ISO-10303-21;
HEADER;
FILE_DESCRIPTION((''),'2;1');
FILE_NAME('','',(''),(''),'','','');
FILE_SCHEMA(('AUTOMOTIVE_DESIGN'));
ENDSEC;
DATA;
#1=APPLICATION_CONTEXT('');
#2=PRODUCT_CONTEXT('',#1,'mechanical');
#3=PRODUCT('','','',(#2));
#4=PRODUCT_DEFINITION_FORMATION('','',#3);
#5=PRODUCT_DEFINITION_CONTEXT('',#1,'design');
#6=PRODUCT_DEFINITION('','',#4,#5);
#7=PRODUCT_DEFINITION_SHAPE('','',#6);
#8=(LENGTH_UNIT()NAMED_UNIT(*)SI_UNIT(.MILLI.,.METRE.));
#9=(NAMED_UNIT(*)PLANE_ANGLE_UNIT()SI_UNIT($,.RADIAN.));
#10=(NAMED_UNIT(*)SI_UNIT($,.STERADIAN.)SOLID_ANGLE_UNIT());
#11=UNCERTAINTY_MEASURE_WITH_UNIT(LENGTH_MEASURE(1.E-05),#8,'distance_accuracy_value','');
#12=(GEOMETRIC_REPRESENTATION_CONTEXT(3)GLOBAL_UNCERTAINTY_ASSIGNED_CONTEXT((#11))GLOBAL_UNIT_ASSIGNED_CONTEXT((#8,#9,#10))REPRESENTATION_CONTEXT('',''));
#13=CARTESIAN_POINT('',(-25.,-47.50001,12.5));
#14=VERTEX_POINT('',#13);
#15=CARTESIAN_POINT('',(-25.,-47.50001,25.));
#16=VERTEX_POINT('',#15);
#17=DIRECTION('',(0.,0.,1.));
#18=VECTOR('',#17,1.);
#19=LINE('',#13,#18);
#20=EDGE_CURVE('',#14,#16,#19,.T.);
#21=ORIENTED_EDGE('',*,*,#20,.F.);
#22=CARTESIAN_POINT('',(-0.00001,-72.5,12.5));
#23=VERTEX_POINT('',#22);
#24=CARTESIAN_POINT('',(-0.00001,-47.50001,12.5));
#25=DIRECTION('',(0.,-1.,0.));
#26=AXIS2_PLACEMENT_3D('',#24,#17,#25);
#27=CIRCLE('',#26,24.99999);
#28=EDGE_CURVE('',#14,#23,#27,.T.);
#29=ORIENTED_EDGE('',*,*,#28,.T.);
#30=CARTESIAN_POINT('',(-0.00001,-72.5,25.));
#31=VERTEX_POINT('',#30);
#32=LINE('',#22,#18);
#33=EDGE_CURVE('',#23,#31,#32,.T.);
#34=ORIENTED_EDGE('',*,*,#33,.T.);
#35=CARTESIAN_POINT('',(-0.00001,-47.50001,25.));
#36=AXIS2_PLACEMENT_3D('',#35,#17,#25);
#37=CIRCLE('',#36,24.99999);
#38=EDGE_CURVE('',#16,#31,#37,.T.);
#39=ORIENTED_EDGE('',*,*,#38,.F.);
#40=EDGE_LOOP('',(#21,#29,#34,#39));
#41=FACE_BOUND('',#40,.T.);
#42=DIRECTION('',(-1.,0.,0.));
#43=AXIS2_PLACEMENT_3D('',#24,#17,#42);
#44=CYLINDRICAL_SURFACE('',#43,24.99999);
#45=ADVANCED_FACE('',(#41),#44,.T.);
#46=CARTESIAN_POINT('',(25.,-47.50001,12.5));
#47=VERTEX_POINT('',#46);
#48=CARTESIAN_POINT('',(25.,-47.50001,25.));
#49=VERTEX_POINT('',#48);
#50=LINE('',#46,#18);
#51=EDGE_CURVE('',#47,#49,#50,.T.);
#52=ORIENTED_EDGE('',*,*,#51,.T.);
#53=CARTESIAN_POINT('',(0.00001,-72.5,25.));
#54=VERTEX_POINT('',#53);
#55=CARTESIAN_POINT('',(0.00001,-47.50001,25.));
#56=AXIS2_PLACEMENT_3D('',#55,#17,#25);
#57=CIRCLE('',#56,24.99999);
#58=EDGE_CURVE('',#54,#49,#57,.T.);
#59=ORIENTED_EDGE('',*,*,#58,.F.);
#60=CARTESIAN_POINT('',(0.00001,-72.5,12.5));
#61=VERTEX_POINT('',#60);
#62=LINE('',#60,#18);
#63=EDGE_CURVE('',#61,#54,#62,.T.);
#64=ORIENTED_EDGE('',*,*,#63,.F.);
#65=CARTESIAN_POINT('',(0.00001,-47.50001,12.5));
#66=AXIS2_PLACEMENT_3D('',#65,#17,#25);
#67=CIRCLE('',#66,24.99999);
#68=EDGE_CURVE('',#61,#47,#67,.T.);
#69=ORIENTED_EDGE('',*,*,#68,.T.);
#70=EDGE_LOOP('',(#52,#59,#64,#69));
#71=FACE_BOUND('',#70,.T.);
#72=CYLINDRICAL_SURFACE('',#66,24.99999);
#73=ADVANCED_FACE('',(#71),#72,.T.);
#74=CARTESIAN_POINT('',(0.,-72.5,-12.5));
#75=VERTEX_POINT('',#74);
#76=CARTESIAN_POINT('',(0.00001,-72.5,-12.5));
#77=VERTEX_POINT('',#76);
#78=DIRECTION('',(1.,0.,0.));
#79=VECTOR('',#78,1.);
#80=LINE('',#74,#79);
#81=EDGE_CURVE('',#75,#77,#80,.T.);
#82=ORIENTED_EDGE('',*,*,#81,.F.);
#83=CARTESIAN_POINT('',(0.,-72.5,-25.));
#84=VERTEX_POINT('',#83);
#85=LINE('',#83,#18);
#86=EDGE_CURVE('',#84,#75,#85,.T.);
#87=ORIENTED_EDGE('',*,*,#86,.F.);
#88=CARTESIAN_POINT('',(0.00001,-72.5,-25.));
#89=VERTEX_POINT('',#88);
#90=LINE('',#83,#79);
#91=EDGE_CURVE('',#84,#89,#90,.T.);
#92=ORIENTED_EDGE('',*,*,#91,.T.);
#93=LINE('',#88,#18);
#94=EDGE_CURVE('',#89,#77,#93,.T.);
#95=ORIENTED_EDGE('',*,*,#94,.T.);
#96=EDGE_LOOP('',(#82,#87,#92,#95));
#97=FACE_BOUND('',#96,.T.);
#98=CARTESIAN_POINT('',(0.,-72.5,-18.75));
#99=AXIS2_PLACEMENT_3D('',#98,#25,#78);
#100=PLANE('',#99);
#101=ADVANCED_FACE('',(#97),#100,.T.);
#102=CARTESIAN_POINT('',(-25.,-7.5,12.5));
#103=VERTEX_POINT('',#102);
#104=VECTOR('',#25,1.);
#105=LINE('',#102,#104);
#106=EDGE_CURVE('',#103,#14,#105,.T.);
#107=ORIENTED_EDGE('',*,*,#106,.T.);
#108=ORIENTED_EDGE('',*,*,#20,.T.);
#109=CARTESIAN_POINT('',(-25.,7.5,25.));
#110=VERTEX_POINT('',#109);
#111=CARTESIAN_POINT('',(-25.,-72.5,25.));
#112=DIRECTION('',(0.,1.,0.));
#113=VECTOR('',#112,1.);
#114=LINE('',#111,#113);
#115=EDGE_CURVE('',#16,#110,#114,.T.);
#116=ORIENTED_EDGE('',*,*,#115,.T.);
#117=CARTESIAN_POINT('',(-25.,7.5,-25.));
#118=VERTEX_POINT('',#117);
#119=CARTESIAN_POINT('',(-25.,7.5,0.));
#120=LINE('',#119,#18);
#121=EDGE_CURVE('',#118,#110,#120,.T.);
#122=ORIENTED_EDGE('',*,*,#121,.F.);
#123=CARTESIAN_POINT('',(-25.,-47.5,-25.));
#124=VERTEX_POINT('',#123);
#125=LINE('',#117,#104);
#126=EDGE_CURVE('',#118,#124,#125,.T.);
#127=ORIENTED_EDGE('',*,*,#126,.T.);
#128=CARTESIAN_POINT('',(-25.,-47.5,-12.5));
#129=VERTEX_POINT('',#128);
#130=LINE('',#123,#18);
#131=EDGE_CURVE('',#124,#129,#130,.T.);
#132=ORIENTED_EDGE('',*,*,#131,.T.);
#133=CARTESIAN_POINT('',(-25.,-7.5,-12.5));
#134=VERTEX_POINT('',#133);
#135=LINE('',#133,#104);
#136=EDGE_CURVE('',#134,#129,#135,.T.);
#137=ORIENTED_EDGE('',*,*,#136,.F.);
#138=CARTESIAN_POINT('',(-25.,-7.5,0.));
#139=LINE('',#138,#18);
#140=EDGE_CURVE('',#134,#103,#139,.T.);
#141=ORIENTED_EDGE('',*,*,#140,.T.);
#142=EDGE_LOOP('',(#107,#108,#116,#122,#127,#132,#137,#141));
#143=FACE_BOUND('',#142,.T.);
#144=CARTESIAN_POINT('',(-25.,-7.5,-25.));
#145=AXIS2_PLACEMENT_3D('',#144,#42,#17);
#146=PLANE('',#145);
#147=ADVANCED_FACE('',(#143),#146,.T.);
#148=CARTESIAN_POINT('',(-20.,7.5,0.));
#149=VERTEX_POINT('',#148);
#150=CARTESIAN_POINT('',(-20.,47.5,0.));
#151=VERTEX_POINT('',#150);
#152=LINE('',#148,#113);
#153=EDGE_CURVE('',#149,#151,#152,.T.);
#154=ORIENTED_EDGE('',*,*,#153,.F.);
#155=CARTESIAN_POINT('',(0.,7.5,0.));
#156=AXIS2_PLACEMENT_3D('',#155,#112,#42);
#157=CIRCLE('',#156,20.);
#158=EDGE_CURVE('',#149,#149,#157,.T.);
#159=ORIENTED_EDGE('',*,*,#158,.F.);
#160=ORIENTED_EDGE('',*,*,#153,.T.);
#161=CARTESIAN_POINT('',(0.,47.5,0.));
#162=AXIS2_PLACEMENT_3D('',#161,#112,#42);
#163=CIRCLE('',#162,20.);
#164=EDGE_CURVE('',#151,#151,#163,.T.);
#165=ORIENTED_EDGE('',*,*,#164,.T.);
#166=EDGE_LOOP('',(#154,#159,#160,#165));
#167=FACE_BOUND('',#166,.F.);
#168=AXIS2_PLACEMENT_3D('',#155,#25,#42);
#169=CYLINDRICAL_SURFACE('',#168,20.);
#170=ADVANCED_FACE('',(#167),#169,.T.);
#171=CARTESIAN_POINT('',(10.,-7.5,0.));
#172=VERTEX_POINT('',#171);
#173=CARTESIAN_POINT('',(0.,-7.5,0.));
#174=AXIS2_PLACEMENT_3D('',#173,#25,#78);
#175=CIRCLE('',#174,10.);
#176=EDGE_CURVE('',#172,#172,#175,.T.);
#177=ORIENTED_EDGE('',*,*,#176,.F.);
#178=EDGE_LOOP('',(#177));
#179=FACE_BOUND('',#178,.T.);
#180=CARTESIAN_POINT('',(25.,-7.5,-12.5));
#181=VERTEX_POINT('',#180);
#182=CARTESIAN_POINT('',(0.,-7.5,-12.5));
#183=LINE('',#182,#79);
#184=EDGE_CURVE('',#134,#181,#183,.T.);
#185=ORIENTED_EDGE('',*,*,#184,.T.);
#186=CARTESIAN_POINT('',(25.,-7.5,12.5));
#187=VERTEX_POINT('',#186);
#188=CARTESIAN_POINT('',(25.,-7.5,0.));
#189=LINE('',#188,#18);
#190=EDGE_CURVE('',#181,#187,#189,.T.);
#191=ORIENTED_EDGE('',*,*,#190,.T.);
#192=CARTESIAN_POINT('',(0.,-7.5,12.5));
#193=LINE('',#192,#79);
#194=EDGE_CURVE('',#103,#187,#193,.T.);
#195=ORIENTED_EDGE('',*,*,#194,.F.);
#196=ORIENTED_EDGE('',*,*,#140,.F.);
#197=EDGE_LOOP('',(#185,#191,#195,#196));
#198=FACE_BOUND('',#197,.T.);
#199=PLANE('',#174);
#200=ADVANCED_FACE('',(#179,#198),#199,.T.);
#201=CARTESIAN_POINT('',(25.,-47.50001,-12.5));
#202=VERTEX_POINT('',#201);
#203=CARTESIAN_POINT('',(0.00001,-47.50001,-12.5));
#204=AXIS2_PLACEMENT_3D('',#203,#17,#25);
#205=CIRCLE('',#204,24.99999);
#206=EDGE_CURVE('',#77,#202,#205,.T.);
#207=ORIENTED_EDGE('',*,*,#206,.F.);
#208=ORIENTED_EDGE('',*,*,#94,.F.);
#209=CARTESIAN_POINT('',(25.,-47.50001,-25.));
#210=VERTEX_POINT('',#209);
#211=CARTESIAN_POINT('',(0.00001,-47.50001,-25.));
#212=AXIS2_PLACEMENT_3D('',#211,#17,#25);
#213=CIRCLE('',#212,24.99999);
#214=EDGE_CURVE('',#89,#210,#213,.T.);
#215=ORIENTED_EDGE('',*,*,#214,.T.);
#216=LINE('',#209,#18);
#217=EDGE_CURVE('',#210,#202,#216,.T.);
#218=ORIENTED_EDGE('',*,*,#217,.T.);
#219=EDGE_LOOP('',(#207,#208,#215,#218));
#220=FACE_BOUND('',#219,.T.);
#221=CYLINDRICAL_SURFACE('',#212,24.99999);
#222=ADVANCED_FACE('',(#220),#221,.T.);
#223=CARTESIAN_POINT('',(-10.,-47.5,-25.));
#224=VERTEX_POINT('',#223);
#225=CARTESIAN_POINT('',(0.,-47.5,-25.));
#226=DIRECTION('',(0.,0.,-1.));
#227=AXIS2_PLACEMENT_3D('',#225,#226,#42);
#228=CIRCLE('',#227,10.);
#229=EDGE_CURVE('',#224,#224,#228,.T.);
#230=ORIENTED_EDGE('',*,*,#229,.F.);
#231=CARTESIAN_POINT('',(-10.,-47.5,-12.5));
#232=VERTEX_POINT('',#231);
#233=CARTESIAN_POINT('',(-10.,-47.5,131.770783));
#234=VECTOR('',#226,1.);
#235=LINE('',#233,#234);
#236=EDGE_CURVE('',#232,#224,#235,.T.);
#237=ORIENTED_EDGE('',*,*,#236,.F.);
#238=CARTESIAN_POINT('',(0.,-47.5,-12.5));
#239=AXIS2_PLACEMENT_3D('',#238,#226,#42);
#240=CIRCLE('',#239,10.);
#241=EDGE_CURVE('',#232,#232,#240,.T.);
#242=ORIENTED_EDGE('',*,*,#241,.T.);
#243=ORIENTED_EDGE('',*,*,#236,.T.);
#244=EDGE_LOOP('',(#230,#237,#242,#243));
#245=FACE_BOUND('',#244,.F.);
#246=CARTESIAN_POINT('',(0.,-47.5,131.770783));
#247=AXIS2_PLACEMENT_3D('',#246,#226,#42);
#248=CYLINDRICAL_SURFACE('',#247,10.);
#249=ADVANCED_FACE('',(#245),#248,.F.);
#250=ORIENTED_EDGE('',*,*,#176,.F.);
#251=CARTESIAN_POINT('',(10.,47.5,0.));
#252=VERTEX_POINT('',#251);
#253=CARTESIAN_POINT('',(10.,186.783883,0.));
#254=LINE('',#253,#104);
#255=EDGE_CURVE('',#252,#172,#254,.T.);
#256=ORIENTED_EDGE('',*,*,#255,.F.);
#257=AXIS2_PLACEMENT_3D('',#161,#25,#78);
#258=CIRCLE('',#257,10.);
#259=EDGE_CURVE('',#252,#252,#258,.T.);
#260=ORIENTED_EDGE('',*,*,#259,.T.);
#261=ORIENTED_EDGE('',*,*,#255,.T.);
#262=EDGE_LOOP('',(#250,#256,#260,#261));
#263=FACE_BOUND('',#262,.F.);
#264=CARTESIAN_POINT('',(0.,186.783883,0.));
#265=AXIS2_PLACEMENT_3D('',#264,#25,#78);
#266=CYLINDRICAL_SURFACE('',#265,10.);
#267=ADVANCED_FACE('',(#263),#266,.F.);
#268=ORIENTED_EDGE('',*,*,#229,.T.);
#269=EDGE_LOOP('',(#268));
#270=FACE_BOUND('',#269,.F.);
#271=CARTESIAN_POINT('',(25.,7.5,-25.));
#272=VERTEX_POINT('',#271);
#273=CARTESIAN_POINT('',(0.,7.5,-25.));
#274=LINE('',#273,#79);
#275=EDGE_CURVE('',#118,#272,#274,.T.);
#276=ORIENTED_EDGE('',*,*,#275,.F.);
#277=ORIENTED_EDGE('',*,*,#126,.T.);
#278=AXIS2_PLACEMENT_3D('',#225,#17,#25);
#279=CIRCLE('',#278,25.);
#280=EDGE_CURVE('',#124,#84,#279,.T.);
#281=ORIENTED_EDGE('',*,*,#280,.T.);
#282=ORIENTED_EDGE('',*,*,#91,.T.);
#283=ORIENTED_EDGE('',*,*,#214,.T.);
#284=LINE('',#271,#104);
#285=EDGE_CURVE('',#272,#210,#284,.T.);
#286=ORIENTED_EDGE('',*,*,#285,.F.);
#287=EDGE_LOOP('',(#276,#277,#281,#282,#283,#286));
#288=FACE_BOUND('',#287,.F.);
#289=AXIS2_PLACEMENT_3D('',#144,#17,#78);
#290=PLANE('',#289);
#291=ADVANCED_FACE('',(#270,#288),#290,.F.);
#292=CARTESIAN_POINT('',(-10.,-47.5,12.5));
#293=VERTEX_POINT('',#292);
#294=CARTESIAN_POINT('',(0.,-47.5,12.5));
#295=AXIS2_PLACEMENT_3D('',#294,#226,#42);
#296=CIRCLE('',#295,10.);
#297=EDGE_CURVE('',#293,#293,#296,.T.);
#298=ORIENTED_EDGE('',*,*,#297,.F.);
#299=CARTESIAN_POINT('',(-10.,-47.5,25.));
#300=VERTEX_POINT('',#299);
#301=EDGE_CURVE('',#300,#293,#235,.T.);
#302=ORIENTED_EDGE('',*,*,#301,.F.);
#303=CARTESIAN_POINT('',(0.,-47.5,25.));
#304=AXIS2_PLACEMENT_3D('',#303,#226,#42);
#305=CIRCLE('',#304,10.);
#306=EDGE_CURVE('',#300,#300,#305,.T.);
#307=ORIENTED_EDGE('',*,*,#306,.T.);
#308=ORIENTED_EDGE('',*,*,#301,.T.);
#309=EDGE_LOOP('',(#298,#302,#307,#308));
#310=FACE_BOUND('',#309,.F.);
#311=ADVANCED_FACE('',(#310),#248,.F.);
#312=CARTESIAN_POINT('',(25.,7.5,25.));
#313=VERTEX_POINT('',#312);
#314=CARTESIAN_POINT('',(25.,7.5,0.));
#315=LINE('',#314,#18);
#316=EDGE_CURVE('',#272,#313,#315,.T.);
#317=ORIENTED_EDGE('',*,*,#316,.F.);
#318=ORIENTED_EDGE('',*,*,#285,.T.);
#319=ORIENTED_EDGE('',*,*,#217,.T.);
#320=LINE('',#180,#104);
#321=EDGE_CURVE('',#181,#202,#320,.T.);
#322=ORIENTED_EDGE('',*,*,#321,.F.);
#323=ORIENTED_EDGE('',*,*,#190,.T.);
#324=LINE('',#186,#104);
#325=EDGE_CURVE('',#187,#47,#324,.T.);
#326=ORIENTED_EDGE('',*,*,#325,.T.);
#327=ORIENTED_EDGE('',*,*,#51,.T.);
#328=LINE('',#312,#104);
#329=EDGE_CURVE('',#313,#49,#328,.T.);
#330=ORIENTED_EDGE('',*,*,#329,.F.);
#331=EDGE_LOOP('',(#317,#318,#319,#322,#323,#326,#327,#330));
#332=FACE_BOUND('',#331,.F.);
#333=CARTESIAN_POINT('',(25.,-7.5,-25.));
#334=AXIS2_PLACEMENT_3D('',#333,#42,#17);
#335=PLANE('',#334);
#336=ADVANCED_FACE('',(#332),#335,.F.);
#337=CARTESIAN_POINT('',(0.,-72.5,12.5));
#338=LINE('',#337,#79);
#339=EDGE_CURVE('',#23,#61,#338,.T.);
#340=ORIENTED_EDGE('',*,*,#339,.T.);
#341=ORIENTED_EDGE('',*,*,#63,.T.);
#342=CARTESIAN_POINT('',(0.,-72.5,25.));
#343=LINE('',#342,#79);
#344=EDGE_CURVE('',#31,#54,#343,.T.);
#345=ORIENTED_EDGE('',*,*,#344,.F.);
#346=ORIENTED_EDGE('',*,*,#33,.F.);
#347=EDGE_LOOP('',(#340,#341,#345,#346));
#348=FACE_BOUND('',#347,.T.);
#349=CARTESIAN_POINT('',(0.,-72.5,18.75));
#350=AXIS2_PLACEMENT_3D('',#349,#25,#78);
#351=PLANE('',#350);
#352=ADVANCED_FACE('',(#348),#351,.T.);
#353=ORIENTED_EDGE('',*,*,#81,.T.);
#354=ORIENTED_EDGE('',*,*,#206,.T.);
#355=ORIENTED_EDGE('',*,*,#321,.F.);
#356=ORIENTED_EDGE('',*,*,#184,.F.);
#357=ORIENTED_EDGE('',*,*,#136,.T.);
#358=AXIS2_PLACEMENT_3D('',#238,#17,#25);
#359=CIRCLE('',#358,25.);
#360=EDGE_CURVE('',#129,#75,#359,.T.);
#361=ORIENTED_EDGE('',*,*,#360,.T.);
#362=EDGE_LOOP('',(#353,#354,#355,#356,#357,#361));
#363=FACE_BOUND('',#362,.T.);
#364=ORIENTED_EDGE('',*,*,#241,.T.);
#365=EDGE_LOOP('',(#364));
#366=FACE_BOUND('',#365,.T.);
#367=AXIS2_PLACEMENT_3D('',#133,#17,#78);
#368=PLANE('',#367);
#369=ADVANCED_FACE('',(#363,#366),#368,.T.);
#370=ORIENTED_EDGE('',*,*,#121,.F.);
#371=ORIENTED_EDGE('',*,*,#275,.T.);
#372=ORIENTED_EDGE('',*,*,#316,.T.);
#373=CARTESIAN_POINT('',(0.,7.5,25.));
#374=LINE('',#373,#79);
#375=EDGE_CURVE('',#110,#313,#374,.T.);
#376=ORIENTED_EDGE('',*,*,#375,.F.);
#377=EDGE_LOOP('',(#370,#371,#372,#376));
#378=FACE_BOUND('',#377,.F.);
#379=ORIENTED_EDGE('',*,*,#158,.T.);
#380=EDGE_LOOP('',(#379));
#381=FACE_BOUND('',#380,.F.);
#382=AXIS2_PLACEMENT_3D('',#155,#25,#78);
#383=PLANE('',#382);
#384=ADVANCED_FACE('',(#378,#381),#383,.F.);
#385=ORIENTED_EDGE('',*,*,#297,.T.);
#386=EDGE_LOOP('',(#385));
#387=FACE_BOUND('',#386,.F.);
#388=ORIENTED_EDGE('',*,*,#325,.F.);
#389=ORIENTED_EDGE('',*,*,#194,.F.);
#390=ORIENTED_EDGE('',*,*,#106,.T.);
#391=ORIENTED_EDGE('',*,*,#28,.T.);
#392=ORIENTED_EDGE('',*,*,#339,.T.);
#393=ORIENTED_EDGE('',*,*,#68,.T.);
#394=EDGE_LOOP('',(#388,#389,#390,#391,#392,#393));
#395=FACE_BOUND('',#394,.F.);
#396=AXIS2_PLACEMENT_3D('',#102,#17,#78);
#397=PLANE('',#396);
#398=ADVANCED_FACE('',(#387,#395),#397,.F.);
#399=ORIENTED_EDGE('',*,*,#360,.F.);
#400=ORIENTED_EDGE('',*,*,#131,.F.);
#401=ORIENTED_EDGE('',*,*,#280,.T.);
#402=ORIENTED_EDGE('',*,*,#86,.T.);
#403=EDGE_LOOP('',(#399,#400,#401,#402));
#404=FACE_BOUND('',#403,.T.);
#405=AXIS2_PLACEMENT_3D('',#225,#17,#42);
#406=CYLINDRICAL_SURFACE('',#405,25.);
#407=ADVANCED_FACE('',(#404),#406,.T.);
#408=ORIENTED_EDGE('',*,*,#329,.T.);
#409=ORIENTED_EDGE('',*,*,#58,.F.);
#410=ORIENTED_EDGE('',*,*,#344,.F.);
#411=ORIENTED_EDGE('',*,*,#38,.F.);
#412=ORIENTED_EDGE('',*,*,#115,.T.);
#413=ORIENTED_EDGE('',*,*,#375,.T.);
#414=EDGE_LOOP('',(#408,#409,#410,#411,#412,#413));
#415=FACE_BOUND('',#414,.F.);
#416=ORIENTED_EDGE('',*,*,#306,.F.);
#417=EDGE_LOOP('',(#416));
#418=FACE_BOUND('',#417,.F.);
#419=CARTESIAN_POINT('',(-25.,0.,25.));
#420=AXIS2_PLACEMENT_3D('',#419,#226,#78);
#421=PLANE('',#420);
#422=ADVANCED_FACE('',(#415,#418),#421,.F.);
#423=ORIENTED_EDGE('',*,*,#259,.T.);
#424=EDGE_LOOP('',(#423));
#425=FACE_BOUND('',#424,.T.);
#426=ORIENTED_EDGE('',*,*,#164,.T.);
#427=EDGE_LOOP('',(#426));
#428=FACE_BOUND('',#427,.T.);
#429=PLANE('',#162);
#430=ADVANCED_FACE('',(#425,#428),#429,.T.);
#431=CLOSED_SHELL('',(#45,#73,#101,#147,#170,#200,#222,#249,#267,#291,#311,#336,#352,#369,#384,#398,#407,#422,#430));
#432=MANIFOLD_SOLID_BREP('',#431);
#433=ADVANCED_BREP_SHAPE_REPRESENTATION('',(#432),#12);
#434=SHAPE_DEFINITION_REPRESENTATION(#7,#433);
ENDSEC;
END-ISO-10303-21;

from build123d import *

# Parameters (mm, degrees)
F0_W     = 50
F0_H     = 50
F1_DEPTH = 7.5
F2_W     = 50
F2_H     = 12.5
F3_DEPTH = 65
F5_D     = 20
F6_R     = 25
F7_R     = 24.99999
F8_R     = 20
F9_DEPTH = 40
F11_D    = 20


# Not quite as in the source:
# - a fillet or chamfer is up to 0.001 mm smaller than in the source, because OpenCascade refuses the exact size


with BuildPart() as f1:
    # F0 (on Front) → F1 (new body, symmetric)
    with BuildSketch(Plane.XZ):
        Rectangle(F0_W, F0_H)
    extrude(amount=F1_DEPTH, both=True)

    # F2 (on face) → F3 (join)
    with BuildSketch(Plane.XZ.offset(7.5)):
        with Locations((0, -18.75)):
            Rectangle(F2_W, F2_H)
        with Locations((0, 18.75)):
            Rectangle(F2_W, F2_H)
    extrude(amount=F3_DEPTH)

    # F5 (through all)
    with Locations(Plane.XY.offset(25)):
        with Locations((0, -47.5)):
            Hole(F5_D / 2)

    # F6
    f6_edges = [f1.edges().sort_by_distance(p)[0] for p in [
        (-25, -72.5, -18.75),
    ]]
    fillet(f6_edges, radius=F6_R)

    # F7 (radius 25 in the source; OpenCascade refuses exactly that, so slightly less here)
    f7_edges = [f1.edges().sort_by_distance(p)[0] for p in [
        (25, -72.5, 18.75),
        (25, -72.5, -18.75),
        (-25, -72.5, 18.75),
    ]]
    fillet(f7_edges, radius=F7_R)

    # F8 (on face) → F9 (join)
    with BuildSketch(Plane(origin=(0, 7.5, 0), x_dir=(-1, 0, 0), z_dir=(0, 1, 0))):
        Circle(F8_R)
    extrude(amount=F9_DEPTH)

    # F11 (through all)
    with Locations(Plane(origin=(0, 47.5, 0), x_dir=(-1, 0, 0), z_dir=(0, 1, 0))):
        with Locations((0, 0)):
            Hole(F11_D / 2)


solid = f1.part
